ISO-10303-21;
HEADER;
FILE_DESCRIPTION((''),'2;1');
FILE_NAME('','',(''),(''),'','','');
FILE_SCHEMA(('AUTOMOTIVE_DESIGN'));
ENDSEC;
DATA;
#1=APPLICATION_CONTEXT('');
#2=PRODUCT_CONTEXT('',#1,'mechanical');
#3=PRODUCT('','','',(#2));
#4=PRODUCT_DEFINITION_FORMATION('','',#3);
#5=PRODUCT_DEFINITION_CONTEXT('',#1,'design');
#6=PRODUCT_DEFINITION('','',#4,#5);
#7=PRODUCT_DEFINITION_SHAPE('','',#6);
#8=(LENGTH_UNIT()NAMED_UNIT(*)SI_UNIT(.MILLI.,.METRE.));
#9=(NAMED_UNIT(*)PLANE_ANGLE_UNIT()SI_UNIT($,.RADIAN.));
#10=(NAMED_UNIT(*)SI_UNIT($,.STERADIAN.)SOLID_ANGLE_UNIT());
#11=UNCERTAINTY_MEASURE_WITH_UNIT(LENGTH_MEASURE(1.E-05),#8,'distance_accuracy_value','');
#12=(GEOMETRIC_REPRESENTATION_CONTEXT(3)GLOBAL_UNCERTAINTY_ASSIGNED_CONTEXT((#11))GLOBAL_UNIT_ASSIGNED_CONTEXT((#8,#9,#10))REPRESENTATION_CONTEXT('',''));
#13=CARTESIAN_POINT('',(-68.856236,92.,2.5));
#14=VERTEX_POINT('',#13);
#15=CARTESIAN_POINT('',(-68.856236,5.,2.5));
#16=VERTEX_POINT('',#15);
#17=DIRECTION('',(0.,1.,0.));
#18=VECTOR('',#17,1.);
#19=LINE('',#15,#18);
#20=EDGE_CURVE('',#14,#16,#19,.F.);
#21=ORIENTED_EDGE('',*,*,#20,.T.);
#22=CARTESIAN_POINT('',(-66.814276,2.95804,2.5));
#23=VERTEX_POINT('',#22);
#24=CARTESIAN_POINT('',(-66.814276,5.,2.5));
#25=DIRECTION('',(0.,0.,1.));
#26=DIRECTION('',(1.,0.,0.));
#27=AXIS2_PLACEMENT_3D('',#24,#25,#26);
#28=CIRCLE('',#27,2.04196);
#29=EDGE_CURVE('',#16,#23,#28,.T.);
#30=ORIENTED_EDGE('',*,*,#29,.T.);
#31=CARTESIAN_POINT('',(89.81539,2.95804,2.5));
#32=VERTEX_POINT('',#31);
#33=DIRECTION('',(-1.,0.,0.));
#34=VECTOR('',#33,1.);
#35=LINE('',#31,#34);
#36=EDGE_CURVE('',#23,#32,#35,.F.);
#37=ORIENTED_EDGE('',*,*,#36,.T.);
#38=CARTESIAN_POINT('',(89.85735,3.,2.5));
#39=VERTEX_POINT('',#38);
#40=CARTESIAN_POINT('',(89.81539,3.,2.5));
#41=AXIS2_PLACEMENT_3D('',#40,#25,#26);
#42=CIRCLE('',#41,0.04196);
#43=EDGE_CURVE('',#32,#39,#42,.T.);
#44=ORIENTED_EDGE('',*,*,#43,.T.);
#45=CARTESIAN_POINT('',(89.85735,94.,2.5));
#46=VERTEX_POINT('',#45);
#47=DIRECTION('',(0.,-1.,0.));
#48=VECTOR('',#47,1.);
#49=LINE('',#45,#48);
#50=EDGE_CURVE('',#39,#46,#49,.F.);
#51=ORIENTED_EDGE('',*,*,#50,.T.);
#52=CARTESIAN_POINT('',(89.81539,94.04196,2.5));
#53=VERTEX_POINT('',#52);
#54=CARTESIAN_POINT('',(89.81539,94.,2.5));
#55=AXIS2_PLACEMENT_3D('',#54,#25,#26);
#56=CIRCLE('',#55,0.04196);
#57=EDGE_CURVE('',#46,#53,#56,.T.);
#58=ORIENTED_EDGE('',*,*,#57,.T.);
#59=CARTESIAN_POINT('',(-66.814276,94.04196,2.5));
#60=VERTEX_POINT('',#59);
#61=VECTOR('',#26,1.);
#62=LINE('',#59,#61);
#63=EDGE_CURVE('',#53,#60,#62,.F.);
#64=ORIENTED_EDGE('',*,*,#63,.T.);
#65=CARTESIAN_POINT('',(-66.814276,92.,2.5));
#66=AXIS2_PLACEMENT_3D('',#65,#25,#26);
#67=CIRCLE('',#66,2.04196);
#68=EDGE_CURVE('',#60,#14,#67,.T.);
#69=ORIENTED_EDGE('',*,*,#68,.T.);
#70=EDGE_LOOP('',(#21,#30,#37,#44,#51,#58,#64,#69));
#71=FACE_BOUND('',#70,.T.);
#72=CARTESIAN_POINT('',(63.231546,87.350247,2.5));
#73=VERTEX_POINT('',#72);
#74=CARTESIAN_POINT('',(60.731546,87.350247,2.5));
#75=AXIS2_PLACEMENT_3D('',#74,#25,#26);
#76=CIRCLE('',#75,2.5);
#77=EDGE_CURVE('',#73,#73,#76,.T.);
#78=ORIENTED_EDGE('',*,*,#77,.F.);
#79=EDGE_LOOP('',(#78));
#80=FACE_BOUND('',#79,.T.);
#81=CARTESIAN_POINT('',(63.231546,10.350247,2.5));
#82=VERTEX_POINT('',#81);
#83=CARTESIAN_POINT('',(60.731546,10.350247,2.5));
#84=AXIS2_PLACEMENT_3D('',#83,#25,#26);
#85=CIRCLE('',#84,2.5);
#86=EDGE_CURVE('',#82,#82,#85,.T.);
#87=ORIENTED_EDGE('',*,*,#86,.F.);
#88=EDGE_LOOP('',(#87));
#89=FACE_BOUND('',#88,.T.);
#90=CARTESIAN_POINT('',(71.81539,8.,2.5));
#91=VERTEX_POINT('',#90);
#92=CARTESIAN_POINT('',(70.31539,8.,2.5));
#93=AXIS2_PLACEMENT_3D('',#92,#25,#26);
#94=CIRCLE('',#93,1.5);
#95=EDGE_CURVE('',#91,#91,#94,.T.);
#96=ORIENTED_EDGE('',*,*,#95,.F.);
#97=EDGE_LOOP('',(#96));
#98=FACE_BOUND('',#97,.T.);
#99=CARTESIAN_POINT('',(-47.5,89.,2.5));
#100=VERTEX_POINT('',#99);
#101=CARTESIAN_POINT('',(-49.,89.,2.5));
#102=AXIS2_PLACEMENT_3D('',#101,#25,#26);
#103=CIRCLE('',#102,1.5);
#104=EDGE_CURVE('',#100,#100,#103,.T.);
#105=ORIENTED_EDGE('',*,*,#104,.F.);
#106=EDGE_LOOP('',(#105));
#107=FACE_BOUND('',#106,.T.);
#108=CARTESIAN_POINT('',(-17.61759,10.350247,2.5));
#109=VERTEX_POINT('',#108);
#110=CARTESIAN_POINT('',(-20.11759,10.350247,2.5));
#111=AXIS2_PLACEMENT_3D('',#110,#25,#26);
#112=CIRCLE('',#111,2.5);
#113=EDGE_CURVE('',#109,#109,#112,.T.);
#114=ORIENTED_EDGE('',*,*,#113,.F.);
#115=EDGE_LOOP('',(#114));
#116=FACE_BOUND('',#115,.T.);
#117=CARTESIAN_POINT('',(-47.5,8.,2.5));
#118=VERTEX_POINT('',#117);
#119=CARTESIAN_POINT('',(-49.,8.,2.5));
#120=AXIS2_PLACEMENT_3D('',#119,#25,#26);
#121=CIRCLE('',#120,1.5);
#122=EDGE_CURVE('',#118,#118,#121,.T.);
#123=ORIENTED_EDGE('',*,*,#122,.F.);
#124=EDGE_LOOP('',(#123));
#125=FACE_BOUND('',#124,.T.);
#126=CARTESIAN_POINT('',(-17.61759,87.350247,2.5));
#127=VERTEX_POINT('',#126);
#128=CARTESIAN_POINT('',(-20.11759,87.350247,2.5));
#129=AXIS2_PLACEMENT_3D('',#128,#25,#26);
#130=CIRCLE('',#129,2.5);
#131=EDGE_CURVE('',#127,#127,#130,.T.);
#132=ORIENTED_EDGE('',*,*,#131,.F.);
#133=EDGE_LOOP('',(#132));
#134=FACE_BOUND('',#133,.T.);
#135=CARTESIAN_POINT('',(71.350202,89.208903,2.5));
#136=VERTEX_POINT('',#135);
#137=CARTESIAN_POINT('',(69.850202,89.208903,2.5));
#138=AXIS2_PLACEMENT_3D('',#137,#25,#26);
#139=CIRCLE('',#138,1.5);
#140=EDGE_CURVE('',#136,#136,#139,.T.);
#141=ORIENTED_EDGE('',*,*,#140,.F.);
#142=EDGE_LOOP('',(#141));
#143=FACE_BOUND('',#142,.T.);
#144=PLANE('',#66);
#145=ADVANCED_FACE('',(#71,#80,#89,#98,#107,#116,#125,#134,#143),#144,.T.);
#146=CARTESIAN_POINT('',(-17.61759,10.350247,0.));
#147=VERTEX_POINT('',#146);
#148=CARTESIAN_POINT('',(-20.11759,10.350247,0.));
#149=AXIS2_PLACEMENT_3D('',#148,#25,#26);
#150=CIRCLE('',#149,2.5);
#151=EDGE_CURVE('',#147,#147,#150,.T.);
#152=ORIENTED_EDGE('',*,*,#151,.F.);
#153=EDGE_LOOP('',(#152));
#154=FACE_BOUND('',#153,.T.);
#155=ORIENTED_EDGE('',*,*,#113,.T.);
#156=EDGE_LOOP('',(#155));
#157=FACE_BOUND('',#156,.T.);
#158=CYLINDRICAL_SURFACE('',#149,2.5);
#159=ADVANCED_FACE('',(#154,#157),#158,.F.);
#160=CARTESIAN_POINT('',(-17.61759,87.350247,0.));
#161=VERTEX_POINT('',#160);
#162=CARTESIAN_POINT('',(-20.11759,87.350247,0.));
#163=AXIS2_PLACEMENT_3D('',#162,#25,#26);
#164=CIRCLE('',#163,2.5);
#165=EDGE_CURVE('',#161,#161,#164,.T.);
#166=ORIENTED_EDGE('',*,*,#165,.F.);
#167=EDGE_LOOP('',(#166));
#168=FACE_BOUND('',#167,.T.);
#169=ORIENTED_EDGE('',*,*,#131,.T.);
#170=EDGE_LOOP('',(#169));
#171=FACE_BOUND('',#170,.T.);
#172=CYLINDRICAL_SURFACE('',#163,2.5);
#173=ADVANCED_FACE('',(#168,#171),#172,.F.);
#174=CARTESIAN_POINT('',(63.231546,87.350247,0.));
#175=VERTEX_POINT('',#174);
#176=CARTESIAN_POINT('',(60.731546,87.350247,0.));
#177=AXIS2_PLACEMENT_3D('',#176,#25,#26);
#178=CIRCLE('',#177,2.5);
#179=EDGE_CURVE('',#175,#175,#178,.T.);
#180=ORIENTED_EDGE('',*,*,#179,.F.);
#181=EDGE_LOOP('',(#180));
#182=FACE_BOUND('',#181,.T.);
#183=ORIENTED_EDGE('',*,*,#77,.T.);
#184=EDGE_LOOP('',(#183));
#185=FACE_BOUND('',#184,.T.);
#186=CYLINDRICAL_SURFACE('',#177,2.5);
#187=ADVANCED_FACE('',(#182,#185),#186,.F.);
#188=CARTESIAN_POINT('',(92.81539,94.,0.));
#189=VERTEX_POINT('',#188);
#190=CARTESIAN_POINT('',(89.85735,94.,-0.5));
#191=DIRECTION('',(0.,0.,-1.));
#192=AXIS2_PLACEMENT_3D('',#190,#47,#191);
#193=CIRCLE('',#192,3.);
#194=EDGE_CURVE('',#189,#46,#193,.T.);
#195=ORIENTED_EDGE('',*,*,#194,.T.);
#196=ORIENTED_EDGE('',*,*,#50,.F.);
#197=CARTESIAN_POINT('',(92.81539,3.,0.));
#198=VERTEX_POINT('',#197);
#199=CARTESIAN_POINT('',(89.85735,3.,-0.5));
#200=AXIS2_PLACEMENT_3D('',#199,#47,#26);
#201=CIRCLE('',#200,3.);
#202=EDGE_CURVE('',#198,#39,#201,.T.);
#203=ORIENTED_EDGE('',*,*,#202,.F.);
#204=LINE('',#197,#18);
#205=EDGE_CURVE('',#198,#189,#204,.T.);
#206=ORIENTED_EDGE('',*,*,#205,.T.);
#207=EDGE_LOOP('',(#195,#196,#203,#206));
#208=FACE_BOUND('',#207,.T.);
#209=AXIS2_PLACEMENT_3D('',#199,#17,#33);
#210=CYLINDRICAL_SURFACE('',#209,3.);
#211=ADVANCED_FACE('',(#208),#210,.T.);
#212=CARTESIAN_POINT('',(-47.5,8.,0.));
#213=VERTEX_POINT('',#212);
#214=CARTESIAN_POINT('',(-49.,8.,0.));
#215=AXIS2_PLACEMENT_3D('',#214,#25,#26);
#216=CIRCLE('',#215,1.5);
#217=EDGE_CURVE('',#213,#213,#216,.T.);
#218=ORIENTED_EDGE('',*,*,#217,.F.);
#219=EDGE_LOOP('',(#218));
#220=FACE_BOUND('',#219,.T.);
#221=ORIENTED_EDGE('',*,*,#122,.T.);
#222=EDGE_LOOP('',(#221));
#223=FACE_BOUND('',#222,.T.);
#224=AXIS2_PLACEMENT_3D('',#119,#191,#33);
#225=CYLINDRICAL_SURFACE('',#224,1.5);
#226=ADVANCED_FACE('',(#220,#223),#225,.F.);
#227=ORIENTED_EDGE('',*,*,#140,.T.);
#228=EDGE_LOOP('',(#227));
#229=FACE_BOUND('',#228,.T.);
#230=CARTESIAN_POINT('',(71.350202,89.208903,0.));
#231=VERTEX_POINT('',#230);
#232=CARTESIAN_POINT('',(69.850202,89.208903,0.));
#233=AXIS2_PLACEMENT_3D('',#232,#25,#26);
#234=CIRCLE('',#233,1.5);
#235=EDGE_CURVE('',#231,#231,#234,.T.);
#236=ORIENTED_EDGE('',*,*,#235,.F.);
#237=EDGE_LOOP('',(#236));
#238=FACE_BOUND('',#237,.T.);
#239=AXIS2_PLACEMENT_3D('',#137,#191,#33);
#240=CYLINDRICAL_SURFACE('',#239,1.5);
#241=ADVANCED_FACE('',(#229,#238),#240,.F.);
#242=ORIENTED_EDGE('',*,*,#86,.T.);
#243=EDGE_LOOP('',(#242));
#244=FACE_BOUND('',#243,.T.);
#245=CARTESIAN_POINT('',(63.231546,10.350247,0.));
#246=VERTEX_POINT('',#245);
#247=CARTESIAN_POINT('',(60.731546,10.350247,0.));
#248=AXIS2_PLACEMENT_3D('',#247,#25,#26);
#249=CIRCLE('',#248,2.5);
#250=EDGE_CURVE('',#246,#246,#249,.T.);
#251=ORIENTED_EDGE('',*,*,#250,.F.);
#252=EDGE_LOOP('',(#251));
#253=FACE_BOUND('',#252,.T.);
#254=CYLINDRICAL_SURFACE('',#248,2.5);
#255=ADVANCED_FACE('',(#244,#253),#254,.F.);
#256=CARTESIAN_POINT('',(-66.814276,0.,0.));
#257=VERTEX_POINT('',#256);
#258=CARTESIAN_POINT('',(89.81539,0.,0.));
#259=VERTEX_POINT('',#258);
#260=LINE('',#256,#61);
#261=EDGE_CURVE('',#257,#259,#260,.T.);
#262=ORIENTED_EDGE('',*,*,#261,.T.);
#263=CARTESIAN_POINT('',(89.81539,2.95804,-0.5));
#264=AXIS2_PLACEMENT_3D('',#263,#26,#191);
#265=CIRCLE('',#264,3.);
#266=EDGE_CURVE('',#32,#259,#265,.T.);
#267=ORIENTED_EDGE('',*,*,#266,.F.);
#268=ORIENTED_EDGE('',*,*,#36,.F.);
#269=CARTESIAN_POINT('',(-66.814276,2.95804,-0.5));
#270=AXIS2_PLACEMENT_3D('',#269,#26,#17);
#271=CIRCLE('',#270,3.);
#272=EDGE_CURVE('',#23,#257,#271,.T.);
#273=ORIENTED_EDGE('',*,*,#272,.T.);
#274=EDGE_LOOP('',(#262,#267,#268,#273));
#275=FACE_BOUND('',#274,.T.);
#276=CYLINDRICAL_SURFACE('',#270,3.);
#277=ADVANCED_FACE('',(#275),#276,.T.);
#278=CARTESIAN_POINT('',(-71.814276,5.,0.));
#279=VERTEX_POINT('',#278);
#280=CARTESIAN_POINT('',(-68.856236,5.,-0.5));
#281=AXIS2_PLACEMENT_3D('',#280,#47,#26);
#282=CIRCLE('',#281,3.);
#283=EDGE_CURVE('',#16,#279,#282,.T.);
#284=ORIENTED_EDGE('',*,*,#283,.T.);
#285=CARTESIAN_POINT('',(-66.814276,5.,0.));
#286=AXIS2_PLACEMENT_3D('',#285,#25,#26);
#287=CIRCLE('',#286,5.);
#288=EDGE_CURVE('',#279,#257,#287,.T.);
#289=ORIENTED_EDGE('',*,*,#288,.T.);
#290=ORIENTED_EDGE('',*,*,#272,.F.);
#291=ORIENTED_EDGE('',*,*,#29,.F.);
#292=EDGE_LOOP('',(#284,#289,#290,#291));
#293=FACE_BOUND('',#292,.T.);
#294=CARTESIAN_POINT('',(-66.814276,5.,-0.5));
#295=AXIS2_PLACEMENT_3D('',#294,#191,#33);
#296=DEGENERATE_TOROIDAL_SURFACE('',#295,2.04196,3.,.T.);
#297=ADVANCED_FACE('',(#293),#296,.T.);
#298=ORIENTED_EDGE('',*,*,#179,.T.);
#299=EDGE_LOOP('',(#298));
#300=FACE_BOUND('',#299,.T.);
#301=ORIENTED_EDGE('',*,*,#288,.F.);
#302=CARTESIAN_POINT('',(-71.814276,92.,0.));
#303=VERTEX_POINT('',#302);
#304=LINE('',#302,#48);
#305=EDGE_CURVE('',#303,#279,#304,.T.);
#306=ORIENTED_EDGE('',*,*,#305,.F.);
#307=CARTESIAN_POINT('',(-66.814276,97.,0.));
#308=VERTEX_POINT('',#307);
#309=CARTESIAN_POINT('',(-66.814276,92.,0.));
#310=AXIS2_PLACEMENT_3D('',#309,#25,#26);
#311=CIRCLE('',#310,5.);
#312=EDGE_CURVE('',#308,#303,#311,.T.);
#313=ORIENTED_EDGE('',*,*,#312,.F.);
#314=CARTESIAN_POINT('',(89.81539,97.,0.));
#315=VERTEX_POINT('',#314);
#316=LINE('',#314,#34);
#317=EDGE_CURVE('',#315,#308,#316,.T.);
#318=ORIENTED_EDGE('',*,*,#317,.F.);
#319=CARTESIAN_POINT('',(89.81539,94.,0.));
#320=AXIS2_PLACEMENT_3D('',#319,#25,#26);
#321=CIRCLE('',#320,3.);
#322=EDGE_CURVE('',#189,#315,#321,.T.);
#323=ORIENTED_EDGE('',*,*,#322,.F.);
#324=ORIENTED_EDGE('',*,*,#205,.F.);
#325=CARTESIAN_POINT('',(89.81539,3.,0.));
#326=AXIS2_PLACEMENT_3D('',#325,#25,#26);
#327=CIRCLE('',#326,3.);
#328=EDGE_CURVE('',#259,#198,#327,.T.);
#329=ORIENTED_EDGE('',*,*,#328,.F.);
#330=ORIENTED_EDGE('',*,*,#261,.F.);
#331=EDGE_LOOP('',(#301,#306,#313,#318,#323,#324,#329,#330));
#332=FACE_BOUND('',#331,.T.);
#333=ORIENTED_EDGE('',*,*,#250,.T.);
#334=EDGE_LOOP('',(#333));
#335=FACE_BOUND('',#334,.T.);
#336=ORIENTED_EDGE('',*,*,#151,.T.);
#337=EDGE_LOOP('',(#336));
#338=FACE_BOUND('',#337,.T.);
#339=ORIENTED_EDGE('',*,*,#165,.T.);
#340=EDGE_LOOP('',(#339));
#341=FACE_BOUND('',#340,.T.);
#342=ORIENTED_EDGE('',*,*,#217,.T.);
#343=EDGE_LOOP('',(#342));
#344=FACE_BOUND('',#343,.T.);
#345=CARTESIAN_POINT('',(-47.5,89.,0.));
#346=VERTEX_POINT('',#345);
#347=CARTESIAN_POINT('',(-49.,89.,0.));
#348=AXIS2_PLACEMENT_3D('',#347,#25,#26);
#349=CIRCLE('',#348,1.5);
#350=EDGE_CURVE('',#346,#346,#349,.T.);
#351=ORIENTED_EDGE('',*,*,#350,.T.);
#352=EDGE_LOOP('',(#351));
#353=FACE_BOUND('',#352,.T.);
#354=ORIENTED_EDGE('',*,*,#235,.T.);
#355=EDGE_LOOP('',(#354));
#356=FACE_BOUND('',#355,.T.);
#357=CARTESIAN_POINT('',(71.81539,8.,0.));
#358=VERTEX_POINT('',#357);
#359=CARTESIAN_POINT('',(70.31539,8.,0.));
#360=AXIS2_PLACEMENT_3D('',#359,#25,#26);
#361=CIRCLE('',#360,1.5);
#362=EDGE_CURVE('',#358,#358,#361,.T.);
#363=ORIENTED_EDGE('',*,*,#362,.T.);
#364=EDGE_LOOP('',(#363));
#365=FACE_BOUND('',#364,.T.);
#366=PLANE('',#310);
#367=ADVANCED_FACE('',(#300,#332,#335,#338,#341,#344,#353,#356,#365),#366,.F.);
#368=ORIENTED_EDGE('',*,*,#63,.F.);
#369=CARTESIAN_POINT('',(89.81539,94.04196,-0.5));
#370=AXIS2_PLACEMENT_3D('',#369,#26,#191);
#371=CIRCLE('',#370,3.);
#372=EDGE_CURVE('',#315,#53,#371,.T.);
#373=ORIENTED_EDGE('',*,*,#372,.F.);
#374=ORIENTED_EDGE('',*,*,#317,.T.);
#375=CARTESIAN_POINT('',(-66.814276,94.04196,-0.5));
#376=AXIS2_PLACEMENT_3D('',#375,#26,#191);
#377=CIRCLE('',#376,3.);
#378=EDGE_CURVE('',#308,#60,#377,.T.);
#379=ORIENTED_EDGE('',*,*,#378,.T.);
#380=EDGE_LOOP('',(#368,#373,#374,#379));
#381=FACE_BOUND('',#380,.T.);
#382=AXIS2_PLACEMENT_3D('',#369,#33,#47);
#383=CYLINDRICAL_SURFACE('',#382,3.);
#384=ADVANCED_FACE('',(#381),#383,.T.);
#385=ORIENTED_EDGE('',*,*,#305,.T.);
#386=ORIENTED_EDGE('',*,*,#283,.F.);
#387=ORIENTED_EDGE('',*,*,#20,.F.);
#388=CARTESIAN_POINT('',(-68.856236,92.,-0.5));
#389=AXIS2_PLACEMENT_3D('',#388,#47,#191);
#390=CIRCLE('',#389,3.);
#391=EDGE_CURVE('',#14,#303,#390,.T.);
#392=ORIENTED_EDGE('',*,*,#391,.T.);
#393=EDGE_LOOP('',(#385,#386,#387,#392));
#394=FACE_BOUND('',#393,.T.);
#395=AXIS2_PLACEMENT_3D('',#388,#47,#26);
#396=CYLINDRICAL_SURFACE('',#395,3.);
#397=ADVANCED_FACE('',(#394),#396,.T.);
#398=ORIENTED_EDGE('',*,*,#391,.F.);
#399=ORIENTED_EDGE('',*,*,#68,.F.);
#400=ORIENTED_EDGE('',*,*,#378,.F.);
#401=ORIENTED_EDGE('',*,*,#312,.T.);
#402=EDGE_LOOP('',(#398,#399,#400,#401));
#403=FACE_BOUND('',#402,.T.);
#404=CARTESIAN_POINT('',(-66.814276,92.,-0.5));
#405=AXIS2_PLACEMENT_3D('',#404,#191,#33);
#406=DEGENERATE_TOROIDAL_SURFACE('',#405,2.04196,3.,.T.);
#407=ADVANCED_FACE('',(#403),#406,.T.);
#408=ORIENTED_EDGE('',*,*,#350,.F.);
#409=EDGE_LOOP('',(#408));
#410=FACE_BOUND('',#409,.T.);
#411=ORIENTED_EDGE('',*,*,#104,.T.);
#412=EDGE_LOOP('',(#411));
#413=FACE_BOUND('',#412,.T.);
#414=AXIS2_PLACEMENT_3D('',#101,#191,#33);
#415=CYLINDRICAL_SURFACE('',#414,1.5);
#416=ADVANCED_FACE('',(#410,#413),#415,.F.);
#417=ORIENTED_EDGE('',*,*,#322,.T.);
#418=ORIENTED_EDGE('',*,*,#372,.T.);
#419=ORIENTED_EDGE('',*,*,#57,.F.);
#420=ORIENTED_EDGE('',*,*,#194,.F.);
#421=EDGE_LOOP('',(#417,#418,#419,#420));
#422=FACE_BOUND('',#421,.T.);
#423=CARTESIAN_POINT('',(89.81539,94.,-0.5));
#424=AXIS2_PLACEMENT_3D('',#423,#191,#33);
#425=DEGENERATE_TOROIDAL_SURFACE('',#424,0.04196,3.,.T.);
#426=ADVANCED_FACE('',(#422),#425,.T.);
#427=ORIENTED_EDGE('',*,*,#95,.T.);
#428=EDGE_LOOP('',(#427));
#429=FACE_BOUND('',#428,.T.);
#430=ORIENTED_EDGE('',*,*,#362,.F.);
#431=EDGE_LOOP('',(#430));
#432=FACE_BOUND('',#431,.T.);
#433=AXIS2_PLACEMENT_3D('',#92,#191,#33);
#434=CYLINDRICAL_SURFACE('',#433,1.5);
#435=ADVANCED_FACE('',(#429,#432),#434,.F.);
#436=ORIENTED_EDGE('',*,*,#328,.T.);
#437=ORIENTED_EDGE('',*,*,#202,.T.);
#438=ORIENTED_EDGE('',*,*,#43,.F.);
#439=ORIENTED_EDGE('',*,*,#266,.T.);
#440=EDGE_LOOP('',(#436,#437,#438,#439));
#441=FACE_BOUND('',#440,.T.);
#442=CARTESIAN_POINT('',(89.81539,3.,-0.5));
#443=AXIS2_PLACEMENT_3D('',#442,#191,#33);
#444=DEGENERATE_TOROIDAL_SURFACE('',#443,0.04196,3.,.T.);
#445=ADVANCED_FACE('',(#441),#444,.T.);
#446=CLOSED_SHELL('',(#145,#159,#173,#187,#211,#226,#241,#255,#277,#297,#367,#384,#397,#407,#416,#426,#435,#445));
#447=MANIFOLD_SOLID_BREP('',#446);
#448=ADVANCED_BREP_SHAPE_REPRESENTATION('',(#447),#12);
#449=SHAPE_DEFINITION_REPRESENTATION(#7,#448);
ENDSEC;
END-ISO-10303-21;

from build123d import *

# Parameters (mm, degrees)
CROQUIS1_R              = 1.5
SALIENTE_EXTRUIR2_DEPTH = 2.5
CROQUIS2_R              = 2.5
CORTAR_EXTRUIR1_DEPTH   = 2.5
REDONDEO1_R             = 3


with BuildPart() as part:
    # Croquis1 → Saliente-Extruir2 (new body)
    with BuildSketch(Plane.XY):
        with BuildLine():
            Line((-71.814275766, 92), (-71.814275766, 5))
            ThreePointArc((-71.814275766, 5), (-70.349809672, 1.464466094), (-66.814275766, 0))
            Line((-66.814275766, 0), (89.815390375, 0))
            ThreePointArc((89.815390375, 0), (91.936710719, 0.878679656), (92.815390375, 3))
            Line((92.815390375, 3), (92.815390375, 94))
            ThreePointArc((92.815390375, 94), (91.936710719, 96.121320344), (89.815390375, 97))
            Line((89.815390375, 97), (-66.814275766, 97))
            ThreePointArc((-66.814275766, 97), (-70.349809672, 95.535533906), (-71.814275766, 92))
        make_face()
        with Locations((69.850202166, 89.208902584)):
            Circle(CROQUIS1_R, mode=Mode.SUBTRACT)
        with Locations((-49, 89)):
            Circle(CROQUIS1_R, mode=Mode.SUBTRACT)
        with Locations((-49, 8)):
            Circle(CROQUIS1_R, mode=Mode.SUBTRACT)
        with Locations((70.315390375, 8)):
            Circle(CROQUIS1_R, mode=Mode.SUBTRACT)
    extrude(amount=SALIENTE_EXTRUIR2_DEPTH)

    # Croquis2 → Cortar-Extruir1 (cut)
    with BuildSketch(Plane.XY.offset(2.5)):
        with Locations((60.731545651, 10.35024669)):
            Circle(CROQUIS2_R)
        with Locations((60.731545651, 87.35024669)):
            Circle(CROQUIS2_R)
        with Locations((-20.117590151, 10.35024669)):
            Circle(CROQUIS2_R)
        with Locations((-20.117590151, 87.35024669)):
            Circle(CROQUIS2_R)
    extrude(amount=-CORTAR_EXTRUIR1_DEPTH, mode=Mode.SUBTRACT)

    # Redondeo1
    # the kernel refuses this fillet: 3 mm, written as the material it takes off along each edge
    with BuildSketch(Plane(origin=(89.815390375, 3, 2.5), x_dir=(0, -1, 0), z_dir=(-1, 0, 0))) as redondeo1_piece_1:
        with BuildLine():
            CenterArc((0.041960108, -3), REDONDEO1_R, 9.594068227, 80.405931773)
            Line((3, -2.5), (3.059160798, -2.49))
            ThreePointArc((3.059160798, -2.49), (3.06, -1.25), (3.06, 0))
            Line((3.06, 0), (3, 0.06))
            Line((3, 0.06), (0.041960108, 0.06))
            Line((0.041960108, 0.06), (0.041960108, 0))
        make_face()
    revolve(axis=Axis((89.815390375, 3, 2.5), (0, 0, 1)), revolution_arc=90, mode=Mode.SUBTRACT)
    with BuildSketch(Plane(origin=(-66.814275766, 0, 2.5), x_dir=(0, 1, 0), z_dir=(1, 0, 0)), Plane(origin=(89.815390375, 97, 2.5), x_dir=(0, -1, 0), z_dir=(-1, 0, 0))) as redondeo1_piece_2:
        with BuildLine():
            CenterArc((2.958039892, -3), REDONDEO1_R, 90, 80.405931773)
            Line((0, -2.5), (-0.059160798, -2.49))
            ThreePointArc((-0.059160798, -2.49), (-0.06, -1.25), (-0.06, 0))
            Line((-0.06, 0), (0, 0.06))
            Line((0, 0.06), (2.958039892, 0.06))
            Line((2.958039892, 0.06), (2.958039892, 0))
        make_face()
    extrude(amount=156.629666142, mode=Mode.SUBTRACT)
    with BuildSketch(Plane(origin=(-66.814275766, 5, 2.5), x_dir=(-1, 0, 0), z_dir=(0, 1, 0))) as redondeo1_piece_3:
        with BuildLine():
            CenterArc((2.041960108, -3), REDONDEO1_R, 9.594068227, 80.405931773)
            Line((2.041960108, 0), (2.041960108, 0.06))
            Line((2.041960108, 0.06), (5, 0.06))
            Line((5, 0.06), (5.06, 0))
            ThreePointArc((5.06, 0), (5.06, -1.25), (5.059160798, -2.49))
            Line((5.059160798, -2.49), (5, -2.5))
        make_face()
    revolve(axis=Axis((-66.814275766, 5, 2.5), (0, 0, 1)), revolution_arc=90, mode=Mode.SUBTRACT)
    with BuildSketch(Plane(origin=(-71.814275766, 92, 2.5), x_dir=(0, 0, -1), z_dir=(0, -1, 0))) as redondeo1_piece_4:
        with BuildLine():
            CenterArc((3, 2.958039892), REDONDEO1_R, 180, 80.405931773)
            Line((0, 2.958039892), (-0.06, 2.958039892))
            Line((-0.06, 2.958039892), (-0.06, 0))
            Line((-0.06, 0), (0, -0.06))
            ThreePointArc((0, -0.06), (1.25, -0.06), (2.49, -0.059160798))
            Line((2.49, -0.059160798), (2.5, 0))
        make_face()
    extrude(amount=87, mode=Mode.SUBTRACT)
    with BuildSketch(Plane(origin=(-66.814275766, 92, 2.5), x_dir=(0, 1, 0), z_dir=(1, 0, 0))) as redondeo1_piece_5:
        with BuildLine():
            CenterArc((2.041960108, -3), REDONDEO1_R, 9.594068227, 80.405931773)
            Line((2.041960108, 0), (2.041960108, 0.06))
            Line((2.041960108, 0.06), (5, 0.06))
            Line((5, 0.06), (5.06, 0))
            ThreePointArc((5.06, 0), (5.06, -1.25), (5.059160798, -2.49))
            Line((5.059160798, -2.49), (5, -2.5))
        make_face()
    revolve(axis=Axis((-66.814275766, 92, 2.5), (0, 0, 1)), revolution_arc=90, mode=Mode.SUBTRACT)
    with BuildSketch(Plane(origin=(89.815390375, 94, 2.5), x_dir=(1, 0, 0), z_dir=(0, -1, 0))) as redondeo1_piece_6:
        with BuildLine():
            CenterArc((0.041960108, -3), REDONDEO1_R, 9.594068227, 80.405931773)
            Line((3, -2.5), (3.059160798, -2.49))
            ThreePointArc((3.059160798, -2.49), (3.06, -1.25), (3.06, 0))
            Line((3.06, 0), (3, 0.06))
            Line((3, 0.06), (0.041960108, 0.06))
            Line((0.041960108, 0.06), (0.041960108, 0))
        make_face()
    revolve(axis=Axis((89.815390375, 94, 2.5), (0, 0, 1)), revolution_arc=90, mode=Mode.SUBTRACT)
    with BuildSketch(Plane(origin=(92.815390375, 3, 2.5), x_dir=(-1, 0, 0), z_dir=(0, 1, 0))) as redondeo1_piece_7:
        with BuildLine():
            CenterArc((2.958039892, -3), REDONDEO1_R, 90, 80.405931773)
            Line((0, -2.5), (-0.059160798, -2.49))
            ThreePointArc((-0.059160798, -2.49), (-0.06, -1.25), (-0.06, 0))
            Line((-0.06, 0), (0, 0.06))
            Line((0, 0.06), (2.958039892, 0.06))
            Line((2.958039892, 0.06), (2.958039892, 0))
        make_face()
    extrude(amount=91, mode=Mode.SUBTRACT)


solid = part.part
